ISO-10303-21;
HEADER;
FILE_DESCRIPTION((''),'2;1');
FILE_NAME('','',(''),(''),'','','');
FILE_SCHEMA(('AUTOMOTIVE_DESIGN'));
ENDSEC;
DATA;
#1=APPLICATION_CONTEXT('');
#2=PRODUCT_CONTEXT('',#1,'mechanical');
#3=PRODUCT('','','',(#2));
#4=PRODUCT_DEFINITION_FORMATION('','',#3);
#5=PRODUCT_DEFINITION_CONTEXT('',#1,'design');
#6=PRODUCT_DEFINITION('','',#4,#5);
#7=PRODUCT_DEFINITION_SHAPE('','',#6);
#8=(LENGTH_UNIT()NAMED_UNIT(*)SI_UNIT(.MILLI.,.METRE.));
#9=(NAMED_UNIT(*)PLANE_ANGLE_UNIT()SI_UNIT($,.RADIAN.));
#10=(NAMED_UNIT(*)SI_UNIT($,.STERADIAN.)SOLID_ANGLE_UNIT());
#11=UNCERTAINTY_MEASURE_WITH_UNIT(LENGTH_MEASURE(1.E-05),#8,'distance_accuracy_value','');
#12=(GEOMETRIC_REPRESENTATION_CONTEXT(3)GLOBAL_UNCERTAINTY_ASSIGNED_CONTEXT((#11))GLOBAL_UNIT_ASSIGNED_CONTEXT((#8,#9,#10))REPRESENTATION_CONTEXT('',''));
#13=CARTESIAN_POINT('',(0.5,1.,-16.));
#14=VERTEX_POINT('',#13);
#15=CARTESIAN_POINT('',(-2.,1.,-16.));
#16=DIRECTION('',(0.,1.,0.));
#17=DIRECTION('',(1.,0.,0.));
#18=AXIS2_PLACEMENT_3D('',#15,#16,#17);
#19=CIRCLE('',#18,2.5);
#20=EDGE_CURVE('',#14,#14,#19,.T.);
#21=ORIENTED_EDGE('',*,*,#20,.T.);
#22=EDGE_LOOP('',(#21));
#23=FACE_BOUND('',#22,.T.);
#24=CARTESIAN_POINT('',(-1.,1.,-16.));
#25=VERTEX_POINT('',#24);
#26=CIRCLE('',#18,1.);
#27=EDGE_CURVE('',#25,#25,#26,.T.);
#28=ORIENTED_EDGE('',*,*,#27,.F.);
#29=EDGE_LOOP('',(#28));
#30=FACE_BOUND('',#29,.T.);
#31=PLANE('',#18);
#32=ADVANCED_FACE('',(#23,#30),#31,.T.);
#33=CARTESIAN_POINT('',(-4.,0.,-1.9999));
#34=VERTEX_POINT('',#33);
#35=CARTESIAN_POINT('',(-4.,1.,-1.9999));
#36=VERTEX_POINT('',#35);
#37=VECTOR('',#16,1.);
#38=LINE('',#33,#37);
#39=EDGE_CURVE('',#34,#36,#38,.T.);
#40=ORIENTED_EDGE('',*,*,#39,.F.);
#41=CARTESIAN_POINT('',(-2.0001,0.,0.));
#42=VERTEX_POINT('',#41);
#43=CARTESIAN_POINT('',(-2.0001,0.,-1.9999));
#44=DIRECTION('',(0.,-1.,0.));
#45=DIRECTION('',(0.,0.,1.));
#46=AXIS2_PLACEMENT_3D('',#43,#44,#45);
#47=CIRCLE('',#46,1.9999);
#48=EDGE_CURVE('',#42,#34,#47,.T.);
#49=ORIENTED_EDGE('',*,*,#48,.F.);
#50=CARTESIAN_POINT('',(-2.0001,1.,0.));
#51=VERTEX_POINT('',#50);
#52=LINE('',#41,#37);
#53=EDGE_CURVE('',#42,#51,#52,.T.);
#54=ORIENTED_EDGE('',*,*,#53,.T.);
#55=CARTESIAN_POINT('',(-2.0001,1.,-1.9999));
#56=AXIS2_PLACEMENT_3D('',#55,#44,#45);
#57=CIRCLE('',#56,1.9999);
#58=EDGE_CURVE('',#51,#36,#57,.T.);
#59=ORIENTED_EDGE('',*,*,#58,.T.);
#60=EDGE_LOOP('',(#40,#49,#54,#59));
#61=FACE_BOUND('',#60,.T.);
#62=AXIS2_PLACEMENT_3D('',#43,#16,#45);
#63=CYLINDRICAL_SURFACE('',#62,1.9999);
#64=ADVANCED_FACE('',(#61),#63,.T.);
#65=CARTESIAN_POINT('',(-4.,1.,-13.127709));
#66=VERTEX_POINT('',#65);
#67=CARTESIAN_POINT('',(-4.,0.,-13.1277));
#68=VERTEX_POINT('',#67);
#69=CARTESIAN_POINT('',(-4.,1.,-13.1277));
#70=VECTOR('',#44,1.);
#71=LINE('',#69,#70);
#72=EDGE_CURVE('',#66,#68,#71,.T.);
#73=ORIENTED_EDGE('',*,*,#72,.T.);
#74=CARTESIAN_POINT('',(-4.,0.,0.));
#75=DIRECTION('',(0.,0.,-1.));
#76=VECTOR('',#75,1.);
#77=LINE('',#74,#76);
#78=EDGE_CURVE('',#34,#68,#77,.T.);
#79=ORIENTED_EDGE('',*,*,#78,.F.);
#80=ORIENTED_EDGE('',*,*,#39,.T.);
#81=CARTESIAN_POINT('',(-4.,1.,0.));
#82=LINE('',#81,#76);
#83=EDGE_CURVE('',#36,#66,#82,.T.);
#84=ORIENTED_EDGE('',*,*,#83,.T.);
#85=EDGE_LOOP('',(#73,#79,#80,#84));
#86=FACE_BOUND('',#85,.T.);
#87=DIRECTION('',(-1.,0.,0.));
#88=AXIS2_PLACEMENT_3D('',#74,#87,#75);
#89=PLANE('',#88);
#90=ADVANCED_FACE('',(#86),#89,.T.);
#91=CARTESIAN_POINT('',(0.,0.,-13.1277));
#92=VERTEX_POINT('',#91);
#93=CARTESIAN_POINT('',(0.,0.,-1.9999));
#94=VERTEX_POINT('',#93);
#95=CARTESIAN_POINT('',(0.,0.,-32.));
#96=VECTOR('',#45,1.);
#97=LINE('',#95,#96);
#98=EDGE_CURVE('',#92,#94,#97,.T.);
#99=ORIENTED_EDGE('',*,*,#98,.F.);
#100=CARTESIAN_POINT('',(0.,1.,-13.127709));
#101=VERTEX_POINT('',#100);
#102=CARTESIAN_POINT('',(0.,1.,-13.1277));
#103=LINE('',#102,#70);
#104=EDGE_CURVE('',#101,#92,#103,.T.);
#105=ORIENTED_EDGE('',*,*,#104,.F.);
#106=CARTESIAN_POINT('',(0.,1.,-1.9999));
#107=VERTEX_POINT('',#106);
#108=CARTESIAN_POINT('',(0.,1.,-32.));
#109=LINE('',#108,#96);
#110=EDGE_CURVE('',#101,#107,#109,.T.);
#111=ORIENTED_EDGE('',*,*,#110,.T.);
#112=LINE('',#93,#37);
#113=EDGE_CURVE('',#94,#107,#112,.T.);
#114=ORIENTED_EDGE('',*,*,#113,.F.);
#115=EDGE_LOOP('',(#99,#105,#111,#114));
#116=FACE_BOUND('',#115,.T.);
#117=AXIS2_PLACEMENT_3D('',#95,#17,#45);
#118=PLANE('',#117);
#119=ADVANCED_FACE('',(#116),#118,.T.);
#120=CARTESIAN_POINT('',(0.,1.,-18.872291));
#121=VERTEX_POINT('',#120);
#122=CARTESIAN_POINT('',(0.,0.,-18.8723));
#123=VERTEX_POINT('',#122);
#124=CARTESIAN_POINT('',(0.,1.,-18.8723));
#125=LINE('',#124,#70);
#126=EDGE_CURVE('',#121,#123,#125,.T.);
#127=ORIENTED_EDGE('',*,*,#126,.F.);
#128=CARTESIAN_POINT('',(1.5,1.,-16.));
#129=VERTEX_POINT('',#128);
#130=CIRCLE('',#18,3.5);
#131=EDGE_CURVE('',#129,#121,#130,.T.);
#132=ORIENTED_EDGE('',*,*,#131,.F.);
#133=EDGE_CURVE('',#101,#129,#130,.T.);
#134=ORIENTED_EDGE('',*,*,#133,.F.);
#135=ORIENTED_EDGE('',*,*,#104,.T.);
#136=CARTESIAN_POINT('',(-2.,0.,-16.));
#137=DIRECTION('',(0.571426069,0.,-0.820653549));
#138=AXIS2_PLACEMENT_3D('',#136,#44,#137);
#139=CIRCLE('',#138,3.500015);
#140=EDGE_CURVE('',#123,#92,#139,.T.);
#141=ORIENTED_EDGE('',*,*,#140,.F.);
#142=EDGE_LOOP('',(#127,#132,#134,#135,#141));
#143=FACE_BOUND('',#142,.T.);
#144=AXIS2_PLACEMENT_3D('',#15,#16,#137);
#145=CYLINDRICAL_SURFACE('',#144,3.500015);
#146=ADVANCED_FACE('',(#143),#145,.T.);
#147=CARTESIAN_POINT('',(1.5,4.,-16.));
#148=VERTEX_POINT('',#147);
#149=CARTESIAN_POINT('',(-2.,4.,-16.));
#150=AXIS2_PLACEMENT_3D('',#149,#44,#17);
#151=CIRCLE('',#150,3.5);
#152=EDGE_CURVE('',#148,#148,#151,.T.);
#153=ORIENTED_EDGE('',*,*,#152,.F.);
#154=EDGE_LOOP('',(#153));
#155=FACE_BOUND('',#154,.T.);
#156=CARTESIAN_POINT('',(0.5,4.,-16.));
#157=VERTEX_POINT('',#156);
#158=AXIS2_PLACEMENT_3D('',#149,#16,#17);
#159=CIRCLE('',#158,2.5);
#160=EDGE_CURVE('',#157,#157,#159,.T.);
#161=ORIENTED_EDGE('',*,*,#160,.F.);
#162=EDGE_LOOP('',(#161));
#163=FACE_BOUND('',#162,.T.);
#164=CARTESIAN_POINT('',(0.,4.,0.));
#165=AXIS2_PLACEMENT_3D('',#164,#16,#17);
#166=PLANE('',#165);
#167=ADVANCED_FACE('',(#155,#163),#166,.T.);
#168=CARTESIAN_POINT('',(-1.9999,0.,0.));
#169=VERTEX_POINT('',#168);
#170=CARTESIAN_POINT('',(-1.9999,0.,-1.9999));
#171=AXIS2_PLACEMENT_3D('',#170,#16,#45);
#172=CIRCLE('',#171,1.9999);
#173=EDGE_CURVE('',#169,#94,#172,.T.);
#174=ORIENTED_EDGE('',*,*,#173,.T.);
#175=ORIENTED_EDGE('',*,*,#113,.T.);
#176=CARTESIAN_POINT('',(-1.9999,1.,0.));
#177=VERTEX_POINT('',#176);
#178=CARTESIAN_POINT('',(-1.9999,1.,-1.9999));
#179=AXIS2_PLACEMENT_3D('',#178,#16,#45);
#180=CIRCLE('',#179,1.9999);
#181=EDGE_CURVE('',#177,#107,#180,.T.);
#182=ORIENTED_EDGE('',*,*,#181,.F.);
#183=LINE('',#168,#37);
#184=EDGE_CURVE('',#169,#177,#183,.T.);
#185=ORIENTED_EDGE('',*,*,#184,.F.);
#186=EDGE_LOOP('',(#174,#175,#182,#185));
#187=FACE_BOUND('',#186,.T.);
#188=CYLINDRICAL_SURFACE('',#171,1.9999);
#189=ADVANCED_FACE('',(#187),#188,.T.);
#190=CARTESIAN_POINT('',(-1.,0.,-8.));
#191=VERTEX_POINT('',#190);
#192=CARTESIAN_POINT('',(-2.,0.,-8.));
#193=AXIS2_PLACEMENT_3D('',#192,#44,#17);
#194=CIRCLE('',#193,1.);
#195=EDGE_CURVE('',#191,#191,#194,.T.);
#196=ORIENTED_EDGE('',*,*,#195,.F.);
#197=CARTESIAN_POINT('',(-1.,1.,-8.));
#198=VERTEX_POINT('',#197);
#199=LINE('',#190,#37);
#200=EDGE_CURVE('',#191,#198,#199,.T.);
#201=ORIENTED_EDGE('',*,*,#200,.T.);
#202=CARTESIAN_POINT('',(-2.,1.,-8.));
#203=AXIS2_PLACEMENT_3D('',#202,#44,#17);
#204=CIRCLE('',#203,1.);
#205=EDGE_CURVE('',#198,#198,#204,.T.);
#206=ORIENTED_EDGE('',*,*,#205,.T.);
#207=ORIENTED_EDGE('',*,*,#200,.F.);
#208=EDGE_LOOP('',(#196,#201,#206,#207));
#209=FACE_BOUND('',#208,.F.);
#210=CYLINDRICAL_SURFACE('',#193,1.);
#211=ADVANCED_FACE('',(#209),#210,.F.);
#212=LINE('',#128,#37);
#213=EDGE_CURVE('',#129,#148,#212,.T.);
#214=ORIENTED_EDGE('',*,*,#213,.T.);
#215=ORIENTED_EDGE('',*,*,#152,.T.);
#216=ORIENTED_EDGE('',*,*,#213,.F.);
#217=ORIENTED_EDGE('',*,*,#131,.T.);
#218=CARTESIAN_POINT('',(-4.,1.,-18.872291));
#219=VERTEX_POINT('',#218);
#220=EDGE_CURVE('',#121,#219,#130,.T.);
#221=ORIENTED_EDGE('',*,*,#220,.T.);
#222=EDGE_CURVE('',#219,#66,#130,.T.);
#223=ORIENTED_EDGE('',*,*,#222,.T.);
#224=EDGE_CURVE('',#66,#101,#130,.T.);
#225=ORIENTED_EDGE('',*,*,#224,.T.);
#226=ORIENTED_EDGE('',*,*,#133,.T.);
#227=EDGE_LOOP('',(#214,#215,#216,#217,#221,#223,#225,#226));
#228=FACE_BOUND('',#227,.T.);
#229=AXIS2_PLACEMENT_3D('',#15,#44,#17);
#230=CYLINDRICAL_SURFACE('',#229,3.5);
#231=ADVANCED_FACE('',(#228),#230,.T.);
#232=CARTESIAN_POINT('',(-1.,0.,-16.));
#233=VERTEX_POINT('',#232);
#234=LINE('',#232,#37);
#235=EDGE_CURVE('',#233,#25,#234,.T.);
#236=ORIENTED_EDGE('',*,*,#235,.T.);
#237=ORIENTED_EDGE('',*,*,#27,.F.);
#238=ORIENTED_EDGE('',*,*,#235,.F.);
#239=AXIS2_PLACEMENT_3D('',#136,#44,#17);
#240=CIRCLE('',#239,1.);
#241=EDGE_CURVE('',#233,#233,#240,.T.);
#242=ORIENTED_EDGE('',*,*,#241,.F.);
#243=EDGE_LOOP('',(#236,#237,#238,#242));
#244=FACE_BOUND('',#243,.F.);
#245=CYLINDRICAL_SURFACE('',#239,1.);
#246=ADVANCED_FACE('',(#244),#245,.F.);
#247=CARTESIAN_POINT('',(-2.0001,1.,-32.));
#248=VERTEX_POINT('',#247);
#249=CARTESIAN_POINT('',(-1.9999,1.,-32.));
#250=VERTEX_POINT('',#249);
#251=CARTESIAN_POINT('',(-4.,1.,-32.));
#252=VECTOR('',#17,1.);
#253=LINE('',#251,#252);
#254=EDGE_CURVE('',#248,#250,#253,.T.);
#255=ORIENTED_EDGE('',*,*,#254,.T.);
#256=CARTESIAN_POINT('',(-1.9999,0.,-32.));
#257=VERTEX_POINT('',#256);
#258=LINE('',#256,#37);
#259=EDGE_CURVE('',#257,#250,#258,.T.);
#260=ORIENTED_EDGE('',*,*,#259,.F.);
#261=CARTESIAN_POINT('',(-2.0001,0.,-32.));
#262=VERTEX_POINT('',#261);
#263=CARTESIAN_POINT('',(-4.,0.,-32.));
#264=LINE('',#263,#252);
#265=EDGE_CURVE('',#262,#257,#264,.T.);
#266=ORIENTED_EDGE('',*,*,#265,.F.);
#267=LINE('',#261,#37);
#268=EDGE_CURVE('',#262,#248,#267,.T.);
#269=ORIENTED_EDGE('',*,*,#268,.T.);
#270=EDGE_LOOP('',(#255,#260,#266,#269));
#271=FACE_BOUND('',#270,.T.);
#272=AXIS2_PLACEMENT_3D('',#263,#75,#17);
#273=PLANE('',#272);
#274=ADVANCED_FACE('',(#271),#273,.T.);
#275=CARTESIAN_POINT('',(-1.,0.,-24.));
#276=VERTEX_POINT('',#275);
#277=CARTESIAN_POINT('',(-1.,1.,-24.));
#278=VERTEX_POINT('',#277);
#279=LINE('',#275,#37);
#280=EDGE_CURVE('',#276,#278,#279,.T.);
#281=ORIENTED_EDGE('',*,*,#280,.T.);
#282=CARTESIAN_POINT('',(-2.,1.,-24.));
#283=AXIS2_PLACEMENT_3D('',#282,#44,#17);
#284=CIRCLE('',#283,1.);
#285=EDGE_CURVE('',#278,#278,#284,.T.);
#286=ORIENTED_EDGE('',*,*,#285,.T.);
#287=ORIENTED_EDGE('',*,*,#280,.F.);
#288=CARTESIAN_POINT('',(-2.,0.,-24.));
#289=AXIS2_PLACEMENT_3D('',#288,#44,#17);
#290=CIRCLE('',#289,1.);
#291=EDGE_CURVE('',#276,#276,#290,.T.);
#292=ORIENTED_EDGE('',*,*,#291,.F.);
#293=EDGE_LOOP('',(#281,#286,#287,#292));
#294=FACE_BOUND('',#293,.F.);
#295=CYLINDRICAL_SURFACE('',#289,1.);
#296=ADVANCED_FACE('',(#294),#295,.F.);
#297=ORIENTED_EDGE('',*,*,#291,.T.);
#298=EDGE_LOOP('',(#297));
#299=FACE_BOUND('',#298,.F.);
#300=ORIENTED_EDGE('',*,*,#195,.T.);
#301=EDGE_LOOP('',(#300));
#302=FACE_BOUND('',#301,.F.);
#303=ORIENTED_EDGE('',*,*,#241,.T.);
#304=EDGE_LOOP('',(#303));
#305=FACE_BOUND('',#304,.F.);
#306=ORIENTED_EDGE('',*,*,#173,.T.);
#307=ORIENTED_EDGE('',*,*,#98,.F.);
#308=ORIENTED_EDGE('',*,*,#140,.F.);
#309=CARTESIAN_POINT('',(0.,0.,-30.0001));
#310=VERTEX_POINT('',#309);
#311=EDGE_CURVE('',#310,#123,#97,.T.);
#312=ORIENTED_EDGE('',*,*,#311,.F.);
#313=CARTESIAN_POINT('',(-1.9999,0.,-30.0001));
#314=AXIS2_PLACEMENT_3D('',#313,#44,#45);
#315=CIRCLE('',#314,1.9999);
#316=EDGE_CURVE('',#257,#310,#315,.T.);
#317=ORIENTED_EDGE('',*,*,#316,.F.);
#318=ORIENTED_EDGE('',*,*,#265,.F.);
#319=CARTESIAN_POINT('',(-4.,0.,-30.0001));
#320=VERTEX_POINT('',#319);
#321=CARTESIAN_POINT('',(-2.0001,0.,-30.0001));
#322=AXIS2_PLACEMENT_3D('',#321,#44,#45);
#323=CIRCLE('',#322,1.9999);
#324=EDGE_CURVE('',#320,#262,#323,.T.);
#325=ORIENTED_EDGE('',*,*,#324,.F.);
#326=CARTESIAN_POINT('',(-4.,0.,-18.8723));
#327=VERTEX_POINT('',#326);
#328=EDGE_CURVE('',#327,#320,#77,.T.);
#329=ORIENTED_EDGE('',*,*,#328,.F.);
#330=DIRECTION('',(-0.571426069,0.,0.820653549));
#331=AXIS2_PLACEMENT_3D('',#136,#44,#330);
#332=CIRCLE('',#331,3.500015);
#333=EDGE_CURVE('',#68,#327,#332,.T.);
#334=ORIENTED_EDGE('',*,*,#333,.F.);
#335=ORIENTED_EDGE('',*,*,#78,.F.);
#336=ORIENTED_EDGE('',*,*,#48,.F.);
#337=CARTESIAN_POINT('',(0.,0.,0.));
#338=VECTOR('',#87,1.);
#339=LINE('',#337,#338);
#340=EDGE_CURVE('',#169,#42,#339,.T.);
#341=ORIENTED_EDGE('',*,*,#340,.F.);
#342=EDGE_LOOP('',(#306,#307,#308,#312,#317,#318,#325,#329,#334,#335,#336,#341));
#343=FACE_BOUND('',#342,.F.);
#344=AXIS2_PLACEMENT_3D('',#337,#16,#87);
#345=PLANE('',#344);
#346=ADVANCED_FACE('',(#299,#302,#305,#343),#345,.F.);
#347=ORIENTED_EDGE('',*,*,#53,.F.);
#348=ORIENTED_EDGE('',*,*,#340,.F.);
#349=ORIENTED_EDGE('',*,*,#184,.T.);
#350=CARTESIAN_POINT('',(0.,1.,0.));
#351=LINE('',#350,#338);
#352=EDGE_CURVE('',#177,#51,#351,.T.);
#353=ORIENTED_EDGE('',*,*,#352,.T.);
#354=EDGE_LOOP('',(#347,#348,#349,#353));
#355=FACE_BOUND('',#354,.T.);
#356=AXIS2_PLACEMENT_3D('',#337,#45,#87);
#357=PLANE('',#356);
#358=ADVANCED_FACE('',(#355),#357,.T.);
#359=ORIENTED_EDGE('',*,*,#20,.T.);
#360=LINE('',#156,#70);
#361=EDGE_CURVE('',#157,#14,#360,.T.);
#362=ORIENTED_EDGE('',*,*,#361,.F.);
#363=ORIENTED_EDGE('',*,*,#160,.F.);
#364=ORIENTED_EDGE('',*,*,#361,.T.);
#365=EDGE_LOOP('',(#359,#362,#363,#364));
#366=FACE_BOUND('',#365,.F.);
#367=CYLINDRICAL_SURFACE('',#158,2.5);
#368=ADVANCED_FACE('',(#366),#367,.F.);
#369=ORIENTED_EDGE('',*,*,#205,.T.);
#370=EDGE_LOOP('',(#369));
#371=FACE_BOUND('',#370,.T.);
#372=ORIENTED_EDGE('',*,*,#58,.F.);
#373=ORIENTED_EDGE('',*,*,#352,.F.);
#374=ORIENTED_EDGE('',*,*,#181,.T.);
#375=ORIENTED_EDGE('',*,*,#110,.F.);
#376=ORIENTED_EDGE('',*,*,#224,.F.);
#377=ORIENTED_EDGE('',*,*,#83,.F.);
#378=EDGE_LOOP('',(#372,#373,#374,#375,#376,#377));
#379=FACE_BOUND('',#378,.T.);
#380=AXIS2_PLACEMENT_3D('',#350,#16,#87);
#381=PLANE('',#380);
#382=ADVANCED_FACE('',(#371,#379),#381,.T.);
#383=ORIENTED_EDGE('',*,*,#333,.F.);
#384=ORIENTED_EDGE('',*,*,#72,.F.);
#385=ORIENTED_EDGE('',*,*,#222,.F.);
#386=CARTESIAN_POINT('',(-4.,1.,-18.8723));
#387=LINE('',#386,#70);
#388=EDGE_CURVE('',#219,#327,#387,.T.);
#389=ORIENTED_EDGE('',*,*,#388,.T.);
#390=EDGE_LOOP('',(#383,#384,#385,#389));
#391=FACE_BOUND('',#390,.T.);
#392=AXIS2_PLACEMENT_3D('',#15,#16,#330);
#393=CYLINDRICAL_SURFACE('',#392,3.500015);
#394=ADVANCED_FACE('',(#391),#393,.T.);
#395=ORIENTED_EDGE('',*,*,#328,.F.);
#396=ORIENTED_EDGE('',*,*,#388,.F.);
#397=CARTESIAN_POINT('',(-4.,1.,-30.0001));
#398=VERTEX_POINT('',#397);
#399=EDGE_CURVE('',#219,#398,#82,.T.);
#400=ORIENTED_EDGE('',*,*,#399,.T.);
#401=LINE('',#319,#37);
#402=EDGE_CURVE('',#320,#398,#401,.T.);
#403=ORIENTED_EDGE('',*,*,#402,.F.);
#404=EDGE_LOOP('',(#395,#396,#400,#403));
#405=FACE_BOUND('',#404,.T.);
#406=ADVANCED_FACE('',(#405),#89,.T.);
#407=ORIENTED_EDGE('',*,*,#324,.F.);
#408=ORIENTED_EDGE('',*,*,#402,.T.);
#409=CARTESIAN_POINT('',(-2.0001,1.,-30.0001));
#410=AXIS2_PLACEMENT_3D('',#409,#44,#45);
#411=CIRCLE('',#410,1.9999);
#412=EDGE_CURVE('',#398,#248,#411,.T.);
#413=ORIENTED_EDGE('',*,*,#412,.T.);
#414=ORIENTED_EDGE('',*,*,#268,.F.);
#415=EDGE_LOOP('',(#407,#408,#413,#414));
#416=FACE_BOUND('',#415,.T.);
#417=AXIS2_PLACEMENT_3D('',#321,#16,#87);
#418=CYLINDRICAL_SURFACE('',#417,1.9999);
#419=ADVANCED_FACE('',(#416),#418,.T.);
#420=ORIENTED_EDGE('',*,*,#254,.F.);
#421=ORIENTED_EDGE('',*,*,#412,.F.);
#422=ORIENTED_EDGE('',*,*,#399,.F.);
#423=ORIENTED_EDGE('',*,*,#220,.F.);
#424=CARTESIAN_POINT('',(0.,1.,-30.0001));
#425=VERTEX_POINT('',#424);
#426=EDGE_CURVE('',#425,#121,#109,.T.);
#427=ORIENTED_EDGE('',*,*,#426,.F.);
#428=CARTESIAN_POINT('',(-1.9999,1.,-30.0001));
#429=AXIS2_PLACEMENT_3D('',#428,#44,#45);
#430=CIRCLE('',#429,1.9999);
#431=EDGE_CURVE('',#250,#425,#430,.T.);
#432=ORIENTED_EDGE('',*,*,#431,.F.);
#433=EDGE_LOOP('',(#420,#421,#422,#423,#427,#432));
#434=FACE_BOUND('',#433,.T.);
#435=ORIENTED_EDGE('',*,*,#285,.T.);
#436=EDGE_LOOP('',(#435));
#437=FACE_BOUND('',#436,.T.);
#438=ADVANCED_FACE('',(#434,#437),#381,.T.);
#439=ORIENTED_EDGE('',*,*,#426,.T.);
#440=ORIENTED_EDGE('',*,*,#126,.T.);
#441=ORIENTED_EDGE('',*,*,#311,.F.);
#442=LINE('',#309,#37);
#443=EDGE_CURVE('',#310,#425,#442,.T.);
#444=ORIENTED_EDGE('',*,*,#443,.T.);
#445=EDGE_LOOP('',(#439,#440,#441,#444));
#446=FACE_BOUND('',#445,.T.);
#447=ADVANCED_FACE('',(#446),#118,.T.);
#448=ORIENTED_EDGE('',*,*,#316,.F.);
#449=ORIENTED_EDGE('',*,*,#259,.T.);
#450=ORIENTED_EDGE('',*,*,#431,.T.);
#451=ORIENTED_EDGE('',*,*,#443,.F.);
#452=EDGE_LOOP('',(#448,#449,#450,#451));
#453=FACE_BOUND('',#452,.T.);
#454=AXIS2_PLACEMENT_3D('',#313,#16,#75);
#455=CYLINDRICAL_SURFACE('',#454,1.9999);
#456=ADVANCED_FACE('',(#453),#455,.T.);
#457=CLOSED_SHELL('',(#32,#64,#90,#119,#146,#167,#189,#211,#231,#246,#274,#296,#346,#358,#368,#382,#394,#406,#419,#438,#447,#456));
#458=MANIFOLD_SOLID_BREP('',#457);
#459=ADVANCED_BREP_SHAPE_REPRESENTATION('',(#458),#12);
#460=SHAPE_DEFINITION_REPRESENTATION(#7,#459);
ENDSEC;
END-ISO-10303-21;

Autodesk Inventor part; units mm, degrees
ref_plane "YZ Plane" through (0, 0, 0) normal (1, 0, 0) x (0, 1, 0)
ref_plane "XZ Plane" through (0, 0, 0) normal (0, 1, 0) x (-1, 0, 0)
ref_plane "XY Plane" through (0, 0, 0) normal (0, 0, 1) x (1, 0, 0)
sketch "Sketch1" plane through (0, 0, 0) normal (0, 1, 0) x (-1, 0, 0)
  line L0 (0, 0) -> (4, 0)
  line L1 (4, 0) -> (4, -32)
  line L2 (4, -32) -> (0, -32)
  line L3 (0, -32) -> (0, 0)
  dimension "d0" = 4
  dimension "d1" = 32
extrude "Extrusion1" add sketch "Sketch1" along normal blind 1
fillet "Fillet1" radius 2 4 edges at (0, 0.5, 0) (-4, 0.5, 0) (0, 0.5, -32) (-4, 0.5, -32)
sketch "Sketch2" plane through (0, 1, 0) normal (0, 1, 0) x (1, 0, 0)
  circle A0 centre (-2, 16) radius 3.5
  arc A1 (-4, 2) -> (0, 2) centre (-2, 2) ccw projected
  line L0 (0, 2) -> (0, 30) projected
  point P0 (0, 0)
  point P1 (-2, 0)
  dimension "d5" = 7
  dimension "d6" = 16
  dimension "d7" = 2
extrude "Extrusion2" add sketch "Sketch2" along normal blind 3
sketch "Sketch3" plane through (0, 1, 0) normal (0, -1, 0) x (1, 0, 0)
  line L0 (0, -13.1277) -> (0, -18.8723) projected
  arc A0 (0, -18.8723) -> (0, -13.1277) centre (-2, -16) ccw projected
  line L1 (-4, -18.8723) -> (-4, -13.1277) projected
  arc A1 (-4, -13.1277) -> (-4, -18.8723) centre (-2, -16) ccw projected
  arc A2 (0, -18.8723) -> (0, -13.1277) centre (-2, -16) ccw
  arc A3 (-4, -13.1277) -> (-4, -18.8723) centre (-2, -16) ccw
  line L2 (-4, -13.1277) -> (-4, -18.8723)
  line L3 (-4, -30) -> (-4, -2) projected
  line L4 (0, -13.1277) -> (0, -18.8723)
  line L5 (0, -2) -> (0, -30) projected
  point P0 (0, 0)
extrude "Extrusion3" add sketch "Sketch3" along normal blind 1
sketch "Sketch4" plane through (0, 0, 0) normal (0, -1, 0) x (1, 0, 0)
  arc A0 (-4, -30) -> (0, -30) centre (-2, -30) ccw projected
  line L0 (0, -18.8723) -> (0, -30) projected
  arc A1 (0, -18.8723) -> (0, -13.1277) centre (-2, -16) ccw projected
  line L1 (0, -2) -> (0, -13.1277) projected
  arc A2 (0, -2) -> (-4, -2) centre (-2, -2) ccw projected
  line L2 (-4, -13.1277) -> (-4, -2) projected
  arc A3 (-4, -13.1277) -> (-4, -18.8723) centre (-2, -16) ccw projected
  line L3 (-4, -30) -> (-4, -18.8723) projected
  circle A4 centre (-2, -16) radius 1
  point P0 (0, 0)
  dimension "d12" = 2
extrude "Extrusion4" cut sketch "Sketch4" against normal through all contours A4
sketch "Sketch5" plane through (-2, 4, -16) normal (0, 1, 0) x (1, 0, 0)
  circle A0 centre (0, 0) radius 1 projected
  circle A1 centre (0, 0) radius 2.5
  point P0 (2, -16)
  dimension "d15" = 5
extrude "Extrusion5" cut sketch "Sketch5" against normal blind 3
sketch "Sketch6" plane through (0, 0, 0) normal (0, -1, 0) x (1, 0, 0)
  circle A0 centre (-2, -8) radius 1
  circle A1 centre (-2, -24) radius 1
  circle A2 centre (-2, -16) radius 1 projected
  point P0 (0, 0)
  dimension "d18" = 2
  dimension "d19" = 2
  dimension "d20" = 16
  dimension "d21" = 8
extrude "Extrusion6" cut sketch "Sketch6" against normal through all contours A0 | A1
properties part number "ServoWings"
